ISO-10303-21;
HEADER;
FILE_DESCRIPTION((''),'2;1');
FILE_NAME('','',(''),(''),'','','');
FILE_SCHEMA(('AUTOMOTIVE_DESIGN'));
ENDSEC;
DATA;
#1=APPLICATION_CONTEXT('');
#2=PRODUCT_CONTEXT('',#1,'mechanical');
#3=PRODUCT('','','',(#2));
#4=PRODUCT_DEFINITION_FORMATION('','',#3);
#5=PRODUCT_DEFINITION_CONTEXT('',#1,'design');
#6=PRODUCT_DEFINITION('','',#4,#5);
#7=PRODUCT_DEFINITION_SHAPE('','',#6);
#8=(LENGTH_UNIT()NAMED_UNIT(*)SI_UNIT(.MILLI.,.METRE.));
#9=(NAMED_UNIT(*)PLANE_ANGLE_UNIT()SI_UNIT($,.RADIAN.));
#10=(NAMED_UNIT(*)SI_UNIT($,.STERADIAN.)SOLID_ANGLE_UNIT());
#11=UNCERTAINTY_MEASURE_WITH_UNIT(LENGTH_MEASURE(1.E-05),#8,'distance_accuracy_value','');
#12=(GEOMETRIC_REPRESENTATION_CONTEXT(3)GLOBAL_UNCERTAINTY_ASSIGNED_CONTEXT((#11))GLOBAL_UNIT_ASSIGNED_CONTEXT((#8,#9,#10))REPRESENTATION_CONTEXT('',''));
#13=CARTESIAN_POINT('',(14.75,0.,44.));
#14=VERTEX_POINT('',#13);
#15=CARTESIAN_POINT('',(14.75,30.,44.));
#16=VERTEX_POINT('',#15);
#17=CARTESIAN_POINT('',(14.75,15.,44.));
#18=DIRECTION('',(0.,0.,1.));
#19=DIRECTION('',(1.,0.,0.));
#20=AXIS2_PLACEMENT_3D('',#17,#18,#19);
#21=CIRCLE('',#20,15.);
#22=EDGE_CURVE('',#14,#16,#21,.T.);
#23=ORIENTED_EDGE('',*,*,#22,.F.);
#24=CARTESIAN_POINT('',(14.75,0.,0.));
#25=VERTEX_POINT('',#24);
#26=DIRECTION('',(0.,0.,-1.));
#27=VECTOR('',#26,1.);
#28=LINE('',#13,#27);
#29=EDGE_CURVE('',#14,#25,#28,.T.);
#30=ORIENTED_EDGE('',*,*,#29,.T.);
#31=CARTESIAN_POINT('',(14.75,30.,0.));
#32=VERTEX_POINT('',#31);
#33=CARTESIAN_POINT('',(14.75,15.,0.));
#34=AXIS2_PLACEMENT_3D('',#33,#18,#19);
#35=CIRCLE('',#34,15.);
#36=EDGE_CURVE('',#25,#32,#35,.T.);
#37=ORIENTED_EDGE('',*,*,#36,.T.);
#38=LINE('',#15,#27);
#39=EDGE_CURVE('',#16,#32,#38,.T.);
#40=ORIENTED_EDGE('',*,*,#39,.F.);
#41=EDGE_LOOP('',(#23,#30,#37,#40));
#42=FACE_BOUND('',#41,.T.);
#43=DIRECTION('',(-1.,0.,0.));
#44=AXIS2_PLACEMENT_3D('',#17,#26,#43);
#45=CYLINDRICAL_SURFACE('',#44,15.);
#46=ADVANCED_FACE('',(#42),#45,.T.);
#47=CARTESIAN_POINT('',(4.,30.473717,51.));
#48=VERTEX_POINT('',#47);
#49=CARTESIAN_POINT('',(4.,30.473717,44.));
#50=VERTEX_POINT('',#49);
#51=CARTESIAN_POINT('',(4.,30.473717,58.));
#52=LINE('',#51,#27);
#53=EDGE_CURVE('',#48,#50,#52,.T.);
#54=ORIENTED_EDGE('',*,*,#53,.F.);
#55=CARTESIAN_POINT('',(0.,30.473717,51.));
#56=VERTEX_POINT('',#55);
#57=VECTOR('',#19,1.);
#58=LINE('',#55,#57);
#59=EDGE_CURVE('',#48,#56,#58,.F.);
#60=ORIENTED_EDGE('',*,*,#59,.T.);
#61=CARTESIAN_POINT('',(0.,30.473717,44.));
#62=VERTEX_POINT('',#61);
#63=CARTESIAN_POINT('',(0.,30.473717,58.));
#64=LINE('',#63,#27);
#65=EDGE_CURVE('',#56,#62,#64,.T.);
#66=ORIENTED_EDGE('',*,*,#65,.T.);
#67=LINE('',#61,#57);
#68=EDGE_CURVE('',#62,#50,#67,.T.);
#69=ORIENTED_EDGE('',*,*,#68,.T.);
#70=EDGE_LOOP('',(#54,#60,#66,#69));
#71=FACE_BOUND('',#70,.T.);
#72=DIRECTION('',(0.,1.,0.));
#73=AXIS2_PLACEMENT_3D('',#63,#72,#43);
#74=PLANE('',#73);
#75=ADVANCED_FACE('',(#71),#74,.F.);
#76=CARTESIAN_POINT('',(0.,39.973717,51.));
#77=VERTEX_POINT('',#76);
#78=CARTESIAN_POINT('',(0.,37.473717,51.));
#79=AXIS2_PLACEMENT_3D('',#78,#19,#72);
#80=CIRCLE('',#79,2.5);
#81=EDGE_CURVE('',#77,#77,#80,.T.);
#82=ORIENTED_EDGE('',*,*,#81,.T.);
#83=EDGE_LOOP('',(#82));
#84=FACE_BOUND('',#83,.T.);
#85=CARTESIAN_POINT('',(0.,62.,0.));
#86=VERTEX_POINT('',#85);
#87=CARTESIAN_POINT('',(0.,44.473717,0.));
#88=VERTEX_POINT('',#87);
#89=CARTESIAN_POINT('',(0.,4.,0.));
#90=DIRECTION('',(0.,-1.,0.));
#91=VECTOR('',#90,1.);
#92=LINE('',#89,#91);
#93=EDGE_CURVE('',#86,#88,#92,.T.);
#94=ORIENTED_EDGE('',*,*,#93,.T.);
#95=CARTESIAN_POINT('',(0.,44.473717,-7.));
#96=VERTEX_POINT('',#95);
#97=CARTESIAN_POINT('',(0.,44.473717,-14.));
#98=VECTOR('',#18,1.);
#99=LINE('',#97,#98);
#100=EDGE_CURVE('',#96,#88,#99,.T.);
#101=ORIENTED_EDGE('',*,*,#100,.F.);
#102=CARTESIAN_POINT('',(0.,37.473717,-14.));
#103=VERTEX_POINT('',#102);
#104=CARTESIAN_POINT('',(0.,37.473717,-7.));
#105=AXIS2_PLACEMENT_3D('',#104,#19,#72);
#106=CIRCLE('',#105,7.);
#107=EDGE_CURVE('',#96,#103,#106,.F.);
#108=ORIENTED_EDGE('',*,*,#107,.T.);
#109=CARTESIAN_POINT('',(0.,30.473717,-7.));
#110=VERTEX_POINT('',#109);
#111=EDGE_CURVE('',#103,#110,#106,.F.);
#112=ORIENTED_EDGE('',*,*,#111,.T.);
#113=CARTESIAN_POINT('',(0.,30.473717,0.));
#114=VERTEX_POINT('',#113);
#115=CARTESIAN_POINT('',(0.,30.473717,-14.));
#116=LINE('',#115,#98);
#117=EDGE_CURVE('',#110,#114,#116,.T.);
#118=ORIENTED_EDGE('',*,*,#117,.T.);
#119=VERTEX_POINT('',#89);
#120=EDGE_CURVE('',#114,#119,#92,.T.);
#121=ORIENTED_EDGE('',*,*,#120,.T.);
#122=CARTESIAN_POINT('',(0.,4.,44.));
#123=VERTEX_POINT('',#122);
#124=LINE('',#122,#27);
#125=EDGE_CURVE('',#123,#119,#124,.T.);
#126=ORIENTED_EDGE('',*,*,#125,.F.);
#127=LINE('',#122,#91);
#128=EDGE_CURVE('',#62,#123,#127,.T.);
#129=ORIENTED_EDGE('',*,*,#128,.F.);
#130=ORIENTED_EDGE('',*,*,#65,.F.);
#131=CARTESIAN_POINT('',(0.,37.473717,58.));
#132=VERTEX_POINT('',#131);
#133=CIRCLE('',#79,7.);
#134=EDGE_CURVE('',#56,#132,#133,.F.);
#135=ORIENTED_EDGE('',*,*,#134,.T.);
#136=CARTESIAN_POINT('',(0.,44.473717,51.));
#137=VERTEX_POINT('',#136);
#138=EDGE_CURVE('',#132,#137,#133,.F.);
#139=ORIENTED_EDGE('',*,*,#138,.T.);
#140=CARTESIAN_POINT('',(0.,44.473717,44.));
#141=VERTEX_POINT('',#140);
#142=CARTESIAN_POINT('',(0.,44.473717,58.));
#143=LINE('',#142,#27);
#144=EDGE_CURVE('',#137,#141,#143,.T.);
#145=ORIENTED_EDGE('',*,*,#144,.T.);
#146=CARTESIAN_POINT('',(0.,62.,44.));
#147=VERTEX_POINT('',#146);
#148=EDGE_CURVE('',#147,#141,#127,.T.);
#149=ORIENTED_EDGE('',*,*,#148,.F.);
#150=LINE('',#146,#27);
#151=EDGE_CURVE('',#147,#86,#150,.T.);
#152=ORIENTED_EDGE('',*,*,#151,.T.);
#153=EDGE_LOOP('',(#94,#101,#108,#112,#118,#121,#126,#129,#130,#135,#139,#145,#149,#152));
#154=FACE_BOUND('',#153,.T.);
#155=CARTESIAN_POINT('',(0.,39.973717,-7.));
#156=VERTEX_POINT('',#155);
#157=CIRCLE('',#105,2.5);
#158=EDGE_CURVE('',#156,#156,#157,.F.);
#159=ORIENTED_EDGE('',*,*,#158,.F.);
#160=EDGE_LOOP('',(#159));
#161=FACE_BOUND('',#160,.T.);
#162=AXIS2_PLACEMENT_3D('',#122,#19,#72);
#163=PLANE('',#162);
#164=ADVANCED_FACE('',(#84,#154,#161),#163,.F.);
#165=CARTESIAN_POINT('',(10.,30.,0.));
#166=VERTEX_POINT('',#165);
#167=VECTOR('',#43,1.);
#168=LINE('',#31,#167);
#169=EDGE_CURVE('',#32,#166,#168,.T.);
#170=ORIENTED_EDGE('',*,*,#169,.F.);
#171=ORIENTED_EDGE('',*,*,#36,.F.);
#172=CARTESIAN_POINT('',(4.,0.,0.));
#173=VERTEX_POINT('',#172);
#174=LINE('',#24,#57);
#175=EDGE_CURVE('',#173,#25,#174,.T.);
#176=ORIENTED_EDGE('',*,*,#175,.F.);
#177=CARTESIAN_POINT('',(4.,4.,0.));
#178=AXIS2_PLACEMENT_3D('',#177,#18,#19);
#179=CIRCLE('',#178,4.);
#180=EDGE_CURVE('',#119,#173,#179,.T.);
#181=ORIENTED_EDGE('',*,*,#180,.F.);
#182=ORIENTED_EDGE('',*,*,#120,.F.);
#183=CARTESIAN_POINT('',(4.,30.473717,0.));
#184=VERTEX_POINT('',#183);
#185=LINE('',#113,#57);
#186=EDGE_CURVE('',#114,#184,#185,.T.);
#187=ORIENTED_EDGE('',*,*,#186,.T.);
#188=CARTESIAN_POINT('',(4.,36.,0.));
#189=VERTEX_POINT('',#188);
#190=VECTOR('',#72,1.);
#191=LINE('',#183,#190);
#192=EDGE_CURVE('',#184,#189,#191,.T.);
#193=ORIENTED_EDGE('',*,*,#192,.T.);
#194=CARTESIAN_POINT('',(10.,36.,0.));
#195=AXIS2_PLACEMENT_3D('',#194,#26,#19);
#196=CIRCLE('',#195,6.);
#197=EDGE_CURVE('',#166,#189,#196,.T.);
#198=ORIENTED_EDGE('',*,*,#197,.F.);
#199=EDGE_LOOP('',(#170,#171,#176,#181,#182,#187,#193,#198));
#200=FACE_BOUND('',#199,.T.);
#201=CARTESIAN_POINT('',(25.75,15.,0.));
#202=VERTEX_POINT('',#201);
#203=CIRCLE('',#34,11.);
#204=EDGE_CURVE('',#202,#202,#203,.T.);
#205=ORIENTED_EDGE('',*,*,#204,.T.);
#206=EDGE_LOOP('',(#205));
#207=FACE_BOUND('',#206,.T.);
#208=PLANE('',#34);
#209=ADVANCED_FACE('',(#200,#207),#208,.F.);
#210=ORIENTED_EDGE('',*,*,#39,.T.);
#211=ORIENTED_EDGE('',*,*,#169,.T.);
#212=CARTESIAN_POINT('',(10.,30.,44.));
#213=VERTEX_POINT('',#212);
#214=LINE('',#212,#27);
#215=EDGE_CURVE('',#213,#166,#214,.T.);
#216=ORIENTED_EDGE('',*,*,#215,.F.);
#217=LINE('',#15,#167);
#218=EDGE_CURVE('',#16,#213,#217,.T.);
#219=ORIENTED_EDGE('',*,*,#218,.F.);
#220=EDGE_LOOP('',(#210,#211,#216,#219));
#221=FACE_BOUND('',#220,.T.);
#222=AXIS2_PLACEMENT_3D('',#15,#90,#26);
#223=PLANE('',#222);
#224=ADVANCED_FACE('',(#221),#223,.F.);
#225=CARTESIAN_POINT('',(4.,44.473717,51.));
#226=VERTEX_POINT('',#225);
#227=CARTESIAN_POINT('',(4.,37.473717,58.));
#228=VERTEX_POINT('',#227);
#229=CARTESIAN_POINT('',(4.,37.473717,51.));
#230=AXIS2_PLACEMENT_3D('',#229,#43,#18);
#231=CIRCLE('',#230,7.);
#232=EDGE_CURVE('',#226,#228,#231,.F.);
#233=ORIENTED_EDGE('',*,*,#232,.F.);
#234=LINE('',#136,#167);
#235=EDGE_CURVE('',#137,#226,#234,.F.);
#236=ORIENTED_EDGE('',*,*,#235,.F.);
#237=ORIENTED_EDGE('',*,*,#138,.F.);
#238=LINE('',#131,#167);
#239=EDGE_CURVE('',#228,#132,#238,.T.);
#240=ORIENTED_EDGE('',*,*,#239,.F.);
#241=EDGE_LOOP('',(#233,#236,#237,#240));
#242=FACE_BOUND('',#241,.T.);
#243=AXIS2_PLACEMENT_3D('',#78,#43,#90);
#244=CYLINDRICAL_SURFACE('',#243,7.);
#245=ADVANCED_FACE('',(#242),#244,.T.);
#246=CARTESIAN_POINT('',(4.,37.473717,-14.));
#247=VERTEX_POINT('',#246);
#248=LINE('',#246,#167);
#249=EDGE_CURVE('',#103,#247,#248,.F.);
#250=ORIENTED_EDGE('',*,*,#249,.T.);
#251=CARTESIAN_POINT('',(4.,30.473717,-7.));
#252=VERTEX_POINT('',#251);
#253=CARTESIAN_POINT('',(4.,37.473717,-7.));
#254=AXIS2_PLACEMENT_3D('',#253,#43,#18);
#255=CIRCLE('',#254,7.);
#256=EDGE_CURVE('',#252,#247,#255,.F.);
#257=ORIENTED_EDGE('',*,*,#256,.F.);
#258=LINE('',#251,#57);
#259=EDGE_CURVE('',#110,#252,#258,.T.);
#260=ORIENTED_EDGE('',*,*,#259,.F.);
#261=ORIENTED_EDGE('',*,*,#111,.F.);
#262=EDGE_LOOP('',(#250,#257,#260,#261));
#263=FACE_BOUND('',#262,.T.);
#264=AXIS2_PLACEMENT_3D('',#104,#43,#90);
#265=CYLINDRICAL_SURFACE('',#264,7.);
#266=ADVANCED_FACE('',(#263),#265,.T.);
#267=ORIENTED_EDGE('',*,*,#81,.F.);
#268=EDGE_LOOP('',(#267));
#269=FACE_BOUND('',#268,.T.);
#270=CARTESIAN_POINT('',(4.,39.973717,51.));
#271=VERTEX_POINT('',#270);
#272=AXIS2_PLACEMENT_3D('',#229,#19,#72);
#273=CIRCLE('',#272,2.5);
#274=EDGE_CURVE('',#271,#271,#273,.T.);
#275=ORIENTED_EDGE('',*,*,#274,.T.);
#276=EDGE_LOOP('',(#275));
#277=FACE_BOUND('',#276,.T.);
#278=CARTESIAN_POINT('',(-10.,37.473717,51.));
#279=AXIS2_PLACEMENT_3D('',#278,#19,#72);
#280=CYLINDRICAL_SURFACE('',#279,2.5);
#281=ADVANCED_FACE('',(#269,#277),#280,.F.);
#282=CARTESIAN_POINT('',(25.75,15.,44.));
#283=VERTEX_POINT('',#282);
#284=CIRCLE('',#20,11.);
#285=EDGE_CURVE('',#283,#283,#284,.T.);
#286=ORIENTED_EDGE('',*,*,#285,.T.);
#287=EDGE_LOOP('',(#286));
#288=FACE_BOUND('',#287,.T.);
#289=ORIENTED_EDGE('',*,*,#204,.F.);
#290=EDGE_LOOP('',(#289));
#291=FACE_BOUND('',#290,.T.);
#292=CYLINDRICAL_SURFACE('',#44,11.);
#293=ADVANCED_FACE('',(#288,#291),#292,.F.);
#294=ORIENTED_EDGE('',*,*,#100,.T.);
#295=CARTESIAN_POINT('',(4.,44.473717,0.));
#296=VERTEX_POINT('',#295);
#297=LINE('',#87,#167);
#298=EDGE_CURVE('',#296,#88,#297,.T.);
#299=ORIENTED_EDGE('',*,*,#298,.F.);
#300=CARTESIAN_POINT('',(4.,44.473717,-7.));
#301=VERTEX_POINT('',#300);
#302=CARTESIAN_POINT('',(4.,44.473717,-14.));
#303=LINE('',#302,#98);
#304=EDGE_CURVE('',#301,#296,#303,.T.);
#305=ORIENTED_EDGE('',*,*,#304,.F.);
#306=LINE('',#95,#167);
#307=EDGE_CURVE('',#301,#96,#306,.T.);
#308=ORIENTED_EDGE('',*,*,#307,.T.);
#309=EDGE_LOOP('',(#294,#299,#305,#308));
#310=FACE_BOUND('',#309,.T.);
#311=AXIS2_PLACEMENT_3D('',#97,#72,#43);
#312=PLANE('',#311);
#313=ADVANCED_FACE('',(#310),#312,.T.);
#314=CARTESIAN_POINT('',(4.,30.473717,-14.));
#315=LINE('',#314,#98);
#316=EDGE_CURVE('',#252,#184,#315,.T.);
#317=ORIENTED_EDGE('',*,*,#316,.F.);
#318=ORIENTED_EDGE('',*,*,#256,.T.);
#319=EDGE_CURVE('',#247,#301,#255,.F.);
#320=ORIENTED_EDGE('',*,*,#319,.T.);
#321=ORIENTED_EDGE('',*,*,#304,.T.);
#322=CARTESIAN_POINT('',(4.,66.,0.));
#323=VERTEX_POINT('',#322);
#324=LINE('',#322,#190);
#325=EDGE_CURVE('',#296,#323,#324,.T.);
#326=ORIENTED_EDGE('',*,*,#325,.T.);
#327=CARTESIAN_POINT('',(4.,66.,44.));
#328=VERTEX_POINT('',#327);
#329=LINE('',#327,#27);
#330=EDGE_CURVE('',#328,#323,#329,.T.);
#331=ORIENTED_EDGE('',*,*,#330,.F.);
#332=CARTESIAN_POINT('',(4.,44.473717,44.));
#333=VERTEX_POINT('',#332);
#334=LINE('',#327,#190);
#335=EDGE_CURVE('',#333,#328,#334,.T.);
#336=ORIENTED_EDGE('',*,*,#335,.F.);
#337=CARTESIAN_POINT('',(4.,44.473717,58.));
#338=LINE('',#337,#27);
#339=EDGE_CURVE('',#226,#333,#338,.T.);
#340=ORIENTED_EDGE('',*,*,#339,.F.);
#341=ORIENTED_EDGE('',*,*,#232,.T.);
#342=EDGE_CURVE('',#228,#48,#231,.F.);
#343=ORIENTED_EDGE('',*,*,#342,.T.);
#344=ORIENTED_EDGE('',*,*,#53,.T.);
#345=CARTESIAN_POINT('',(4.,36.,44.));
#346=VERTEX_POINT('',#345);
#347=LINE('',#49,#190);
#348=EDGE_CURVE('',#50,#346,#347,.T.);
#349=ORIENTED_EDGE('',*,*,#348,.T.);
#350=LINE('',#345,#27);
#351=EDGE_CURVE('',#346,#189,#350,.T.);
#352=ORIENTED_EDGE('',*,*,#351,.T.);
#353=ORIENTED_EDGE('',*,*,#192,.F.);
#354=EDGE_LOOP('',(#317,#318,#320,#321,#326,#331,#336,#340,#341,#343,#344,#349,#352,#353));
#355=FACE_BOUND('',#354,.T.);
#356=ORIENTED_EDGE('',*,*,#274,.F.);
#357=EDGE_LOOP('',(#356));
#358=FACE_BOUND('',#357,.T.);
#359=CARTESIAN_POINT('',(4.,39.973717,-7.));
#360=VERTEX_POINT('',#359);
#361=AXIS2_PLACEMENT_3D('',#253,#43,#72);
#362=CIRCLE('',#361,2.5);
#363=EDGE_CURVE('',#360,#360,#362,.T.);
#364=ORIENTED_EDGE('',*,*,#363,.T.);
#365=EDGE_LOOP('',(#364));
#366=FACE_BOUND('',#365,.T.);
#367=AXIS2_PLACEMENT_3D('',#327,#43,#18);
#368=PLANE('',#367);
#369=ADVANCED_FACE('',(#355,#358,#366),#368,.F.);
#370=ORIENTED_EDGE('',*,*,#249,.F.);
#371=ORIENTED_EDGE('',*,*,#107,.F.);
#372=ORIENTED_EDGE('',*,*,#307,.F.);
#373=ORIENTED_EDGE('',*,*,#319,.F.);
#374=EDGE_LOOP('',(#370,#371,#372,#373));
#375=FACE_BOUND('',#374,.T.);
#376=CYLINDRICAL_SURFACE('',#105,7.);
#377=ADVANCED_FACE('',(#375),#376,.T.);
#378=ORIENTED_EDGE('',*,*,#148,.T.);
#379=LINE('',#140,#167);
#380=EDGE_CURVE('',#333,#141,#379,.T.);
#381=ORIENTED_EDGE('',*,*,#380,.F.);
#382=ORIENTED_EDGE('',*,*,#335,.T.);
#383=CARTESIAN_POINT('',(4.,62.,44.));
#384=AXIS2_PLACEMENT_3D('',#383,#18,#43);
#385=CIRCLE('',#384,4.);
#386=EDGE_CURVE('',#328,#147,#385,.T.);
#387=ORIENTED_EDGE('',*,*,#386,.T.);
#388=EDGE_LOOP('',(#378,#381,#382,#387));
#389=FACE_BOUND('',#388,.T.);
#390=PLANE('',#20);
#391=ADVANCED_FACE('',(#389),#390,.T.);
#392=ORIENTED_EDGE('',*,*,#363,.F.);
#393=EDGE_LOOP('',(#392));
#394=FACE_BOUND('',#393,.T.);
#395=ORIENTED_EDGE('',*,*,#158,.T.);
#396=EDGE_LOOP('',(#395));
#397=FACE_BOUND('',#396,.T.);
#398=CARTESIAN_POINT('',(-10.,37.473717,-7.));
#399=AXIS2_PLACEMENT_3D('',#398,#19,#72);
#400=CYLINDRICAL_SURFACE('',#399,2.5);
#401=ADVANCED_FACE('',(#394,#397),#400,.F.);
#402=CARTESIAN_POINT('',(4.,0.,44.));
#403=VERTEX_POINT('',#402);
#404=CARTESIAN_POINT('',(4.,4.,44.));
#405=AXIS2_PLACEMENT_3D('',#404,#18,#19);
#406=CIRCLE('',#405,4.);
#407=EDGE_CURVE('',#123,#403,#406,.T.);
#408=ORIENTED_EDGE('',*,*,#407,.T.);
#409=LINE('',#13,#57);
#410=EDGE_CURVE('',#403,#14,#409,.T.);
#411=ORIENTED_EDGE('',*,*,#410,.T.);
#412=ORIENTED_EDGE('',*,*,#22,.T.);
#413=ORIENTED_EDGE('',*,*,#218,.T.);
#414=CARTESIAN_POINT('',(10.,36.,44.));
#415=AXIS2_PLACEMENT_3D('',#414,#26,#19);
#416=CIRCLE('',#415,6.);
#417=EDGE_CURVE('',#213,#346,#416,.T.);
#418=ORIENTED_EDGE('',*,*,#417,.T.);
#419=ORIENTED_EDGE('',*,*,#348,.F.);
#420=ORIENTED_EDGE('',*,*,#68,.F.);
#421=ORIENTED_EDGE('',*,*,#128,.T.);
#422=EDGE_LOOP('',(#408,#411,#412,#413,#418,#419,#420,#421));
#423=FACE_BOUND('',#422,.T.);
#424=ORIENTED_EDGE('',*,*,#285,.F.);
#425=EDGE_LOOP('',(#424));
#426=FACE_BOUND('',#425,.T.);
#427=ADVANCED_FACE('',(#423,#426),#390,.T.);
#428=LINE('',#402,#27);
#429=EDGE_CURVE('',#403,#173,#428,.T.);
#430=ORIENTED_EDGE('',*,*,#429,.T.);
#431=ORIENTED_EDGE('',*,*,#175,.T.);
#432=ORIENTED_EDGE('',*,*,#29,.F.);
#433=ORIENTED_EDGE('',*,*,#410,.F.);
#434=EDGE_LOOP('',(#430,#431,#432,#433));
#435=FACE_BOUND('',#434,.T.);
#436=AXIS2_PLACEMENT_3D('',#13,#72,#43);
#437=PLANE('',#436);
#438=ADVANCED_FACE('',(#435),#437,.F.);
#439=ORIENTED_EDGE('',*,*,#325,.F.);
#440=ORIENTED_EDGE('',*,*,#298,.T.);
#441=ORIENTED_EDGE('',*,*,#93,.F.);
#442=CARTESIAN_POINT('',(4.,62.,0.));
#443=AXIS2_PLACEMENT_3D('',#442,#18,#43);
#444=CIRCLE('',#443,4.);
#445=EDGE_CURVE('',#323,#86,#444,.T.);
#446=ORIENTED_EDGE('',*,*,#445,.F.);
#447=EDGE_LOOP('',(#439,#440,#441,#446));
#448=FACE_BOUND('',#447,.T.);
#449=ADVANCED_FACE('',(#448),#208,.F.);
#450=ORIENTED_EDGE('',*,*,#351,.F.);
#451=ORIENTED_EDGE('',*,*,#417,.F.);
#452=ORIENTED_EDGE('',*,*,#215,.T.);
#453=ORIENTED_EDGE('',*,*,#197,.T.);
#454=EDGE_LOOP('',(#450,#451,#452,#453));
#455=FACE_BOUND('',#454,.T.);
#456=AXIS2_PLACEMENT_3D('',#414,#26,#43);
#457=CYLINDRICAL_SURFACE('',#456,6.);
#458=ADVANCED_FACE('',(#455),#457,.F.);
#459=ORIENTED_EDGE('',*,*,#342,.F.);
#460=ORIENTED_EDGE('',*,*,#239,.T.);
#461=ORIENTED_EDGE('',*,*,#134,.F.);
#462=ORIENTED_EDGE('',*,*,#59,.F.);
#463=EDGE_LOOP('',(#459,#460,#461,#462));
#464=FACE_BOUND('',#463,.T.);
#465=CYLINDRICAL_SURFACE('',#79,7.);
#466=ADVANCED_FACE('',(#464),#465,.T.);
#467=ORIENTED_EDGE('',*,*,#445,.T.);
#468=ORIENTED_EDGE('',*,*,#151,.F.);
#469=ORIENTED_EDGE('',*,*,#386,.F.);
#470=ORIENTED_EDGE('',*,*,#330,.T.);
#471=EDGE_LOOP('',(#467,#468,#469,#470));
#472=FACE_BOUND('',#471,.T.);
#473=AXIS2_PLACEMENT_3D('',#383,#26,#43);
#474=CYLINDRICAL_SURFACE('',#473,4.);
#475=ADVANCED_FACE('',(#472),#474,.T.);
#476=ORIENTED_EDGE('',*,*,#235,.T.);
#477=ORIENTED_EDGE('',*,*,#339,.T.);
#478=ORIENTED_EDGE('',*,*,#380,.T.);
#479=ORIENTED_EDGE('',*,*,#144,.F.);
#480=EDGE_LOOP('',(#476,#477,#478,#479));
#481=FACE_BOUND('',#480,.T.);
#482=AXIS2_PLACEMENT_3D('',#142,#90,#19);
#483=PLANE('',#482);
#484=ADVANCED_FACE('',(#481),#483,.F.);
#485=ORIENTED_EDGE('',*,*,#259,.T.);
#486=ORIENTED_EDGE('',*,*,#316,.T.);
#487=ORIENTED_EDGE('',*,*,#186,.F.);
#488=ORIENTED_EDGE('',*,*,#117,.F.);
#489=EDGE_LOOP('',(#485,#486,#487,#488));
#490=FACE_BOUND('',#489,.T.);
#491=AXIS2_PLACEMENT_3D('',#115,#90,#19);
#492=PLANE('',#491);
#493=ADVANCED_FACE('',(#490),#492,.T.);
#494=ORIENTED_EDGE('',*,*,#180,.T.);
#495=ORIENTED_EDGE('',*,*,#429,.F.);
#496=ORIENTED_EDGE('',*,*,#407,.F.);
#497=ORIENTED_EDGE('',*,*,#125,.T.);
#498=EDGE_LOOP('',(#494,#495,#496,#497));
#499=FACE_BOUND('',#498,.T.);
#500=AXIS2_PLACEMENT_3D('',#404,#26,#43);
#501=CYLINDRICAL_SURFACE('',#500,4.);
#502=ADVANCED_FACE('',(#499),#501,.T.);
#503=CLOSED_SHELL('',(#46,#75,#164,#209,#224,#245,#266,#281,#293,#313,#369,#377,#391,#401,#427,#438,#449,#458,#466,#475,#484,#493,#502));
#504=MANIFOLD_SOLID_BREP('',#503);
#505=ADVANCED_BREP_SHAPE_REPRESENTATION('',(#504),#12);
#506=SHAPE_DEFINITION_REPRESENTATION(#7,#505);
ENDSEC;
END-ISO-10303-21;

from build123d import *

# Parameters (mm, degrees)
SKETCH2_R            = 11
BOSS_EXTRUDE1_DEPTH  = 44
SKETCH5_W            = 4
SKETCH5_H            = 14
BOSS_EXTRUDE3_DEPTH  = 14
FILLET3_R            = 7
SKETCH6_R            = 2.5
CUT_EXTRUDE2_DEPTH   = 14
FILLET3_OF_MIRROR2_R = 7


with BuildPart() as part:
    # Sketch2 → Boss-Extrude1 (new body)
    with BuildSketch(Plane.XY):
        with BuildLine():
            Line((0, 4), (0, 62))
            ThreePointArc((0, 62), (1.171572875, 64.828427125), (4, 66))
            Line((4, 66), (4, 36))
            ThreePointArc((4, 36), (5.757359313, 31.757359313), (10, 30))
            Line((10, 30), (14.75, 30))
            ThreePointArc((14.75, 30), (18.324268314, 29.567930739), (21.692625765, 28.296614136))
            ThreePointArc((21.692625765, 28.296614136), (29.317930739, 11.425731686), (14.75, 0))
            Line((14.75, 0), (4, 0))
            ThreePointArc((4, 0), (1.171572875, 1.171572875), (0, 4))
        make_face()
        with Locations((14.75, 15)):
            Circle(SKETCH2_R, mode=Mode.SUBTRACT)
    extrude(amount=BOSS_EXTRUDE1_DEPTH)

    # Sketch5 → Boss-Extrude3 (add)
    with BuildSketch(Plane.XY.offset(44)):
        with Locations((2, 37.473717009)):
            Rectangle(SKETCH5_W, SKETCH5_H)
    boss_extrude3 = extrude(amount=BOSS_EXTRUDE3_DEPTH)

    # Fillet3
    fillet3_edges = [part.edges().sort_by_distance(p)[0] for p in [
        (2, 30.473717009, 58),
        (2, 44.473717009, 58),
    ]]
    fillet(fillet3_edges, radius=FILLET3_R - 0.0001)  # a hair under: the kernel refuses the full size

    # Sketch6 → Cut-Extrude2 (cut)
    with BuildSketch(Plane(origin=(4, 0, 0), x_dir=(0, 0, -1), z_dir=(1, 0, 0))):
        with Locations(Location((-51, 37.473717009, 0), (0, 0, 90))):
            Circle(SKETCH6_R)
    cut_extrude2 = extrude(amount=-CUT_EXTRUDE2_DEPTH, mode=Mode.SUBTRACT)

    # Mirror2: Boss-Extrude3, Cut-Extrude2 across plane
    add(boss_extrude3.mirror(Plane(origin=(0, 0, 22), x_dir=(1, 0, 0), z_dir=(0, 0, -1))))
    add(cut_extrude2.mirror(Plane(origin=(0, 0, 22), x_dir=(1, 0, 0), z_dir=(0, 0, -1))), mode=Mode.SUBTRACT)

    # Fillet3 of Mirror2
    fillet3_of_mirror2_edges = [part.edges().sort_by_distance(p)[0] for p in [
        (2, 30.473717009, -14),
        (2, 44.473717009, -14),
    ]]
    fillet(fillet3_of_mirror2_edges, radius=FILLET3_OF_MIRROR2_R - 0.0001)  # a hair under: the kernel refuses the full size


solid = part.part
